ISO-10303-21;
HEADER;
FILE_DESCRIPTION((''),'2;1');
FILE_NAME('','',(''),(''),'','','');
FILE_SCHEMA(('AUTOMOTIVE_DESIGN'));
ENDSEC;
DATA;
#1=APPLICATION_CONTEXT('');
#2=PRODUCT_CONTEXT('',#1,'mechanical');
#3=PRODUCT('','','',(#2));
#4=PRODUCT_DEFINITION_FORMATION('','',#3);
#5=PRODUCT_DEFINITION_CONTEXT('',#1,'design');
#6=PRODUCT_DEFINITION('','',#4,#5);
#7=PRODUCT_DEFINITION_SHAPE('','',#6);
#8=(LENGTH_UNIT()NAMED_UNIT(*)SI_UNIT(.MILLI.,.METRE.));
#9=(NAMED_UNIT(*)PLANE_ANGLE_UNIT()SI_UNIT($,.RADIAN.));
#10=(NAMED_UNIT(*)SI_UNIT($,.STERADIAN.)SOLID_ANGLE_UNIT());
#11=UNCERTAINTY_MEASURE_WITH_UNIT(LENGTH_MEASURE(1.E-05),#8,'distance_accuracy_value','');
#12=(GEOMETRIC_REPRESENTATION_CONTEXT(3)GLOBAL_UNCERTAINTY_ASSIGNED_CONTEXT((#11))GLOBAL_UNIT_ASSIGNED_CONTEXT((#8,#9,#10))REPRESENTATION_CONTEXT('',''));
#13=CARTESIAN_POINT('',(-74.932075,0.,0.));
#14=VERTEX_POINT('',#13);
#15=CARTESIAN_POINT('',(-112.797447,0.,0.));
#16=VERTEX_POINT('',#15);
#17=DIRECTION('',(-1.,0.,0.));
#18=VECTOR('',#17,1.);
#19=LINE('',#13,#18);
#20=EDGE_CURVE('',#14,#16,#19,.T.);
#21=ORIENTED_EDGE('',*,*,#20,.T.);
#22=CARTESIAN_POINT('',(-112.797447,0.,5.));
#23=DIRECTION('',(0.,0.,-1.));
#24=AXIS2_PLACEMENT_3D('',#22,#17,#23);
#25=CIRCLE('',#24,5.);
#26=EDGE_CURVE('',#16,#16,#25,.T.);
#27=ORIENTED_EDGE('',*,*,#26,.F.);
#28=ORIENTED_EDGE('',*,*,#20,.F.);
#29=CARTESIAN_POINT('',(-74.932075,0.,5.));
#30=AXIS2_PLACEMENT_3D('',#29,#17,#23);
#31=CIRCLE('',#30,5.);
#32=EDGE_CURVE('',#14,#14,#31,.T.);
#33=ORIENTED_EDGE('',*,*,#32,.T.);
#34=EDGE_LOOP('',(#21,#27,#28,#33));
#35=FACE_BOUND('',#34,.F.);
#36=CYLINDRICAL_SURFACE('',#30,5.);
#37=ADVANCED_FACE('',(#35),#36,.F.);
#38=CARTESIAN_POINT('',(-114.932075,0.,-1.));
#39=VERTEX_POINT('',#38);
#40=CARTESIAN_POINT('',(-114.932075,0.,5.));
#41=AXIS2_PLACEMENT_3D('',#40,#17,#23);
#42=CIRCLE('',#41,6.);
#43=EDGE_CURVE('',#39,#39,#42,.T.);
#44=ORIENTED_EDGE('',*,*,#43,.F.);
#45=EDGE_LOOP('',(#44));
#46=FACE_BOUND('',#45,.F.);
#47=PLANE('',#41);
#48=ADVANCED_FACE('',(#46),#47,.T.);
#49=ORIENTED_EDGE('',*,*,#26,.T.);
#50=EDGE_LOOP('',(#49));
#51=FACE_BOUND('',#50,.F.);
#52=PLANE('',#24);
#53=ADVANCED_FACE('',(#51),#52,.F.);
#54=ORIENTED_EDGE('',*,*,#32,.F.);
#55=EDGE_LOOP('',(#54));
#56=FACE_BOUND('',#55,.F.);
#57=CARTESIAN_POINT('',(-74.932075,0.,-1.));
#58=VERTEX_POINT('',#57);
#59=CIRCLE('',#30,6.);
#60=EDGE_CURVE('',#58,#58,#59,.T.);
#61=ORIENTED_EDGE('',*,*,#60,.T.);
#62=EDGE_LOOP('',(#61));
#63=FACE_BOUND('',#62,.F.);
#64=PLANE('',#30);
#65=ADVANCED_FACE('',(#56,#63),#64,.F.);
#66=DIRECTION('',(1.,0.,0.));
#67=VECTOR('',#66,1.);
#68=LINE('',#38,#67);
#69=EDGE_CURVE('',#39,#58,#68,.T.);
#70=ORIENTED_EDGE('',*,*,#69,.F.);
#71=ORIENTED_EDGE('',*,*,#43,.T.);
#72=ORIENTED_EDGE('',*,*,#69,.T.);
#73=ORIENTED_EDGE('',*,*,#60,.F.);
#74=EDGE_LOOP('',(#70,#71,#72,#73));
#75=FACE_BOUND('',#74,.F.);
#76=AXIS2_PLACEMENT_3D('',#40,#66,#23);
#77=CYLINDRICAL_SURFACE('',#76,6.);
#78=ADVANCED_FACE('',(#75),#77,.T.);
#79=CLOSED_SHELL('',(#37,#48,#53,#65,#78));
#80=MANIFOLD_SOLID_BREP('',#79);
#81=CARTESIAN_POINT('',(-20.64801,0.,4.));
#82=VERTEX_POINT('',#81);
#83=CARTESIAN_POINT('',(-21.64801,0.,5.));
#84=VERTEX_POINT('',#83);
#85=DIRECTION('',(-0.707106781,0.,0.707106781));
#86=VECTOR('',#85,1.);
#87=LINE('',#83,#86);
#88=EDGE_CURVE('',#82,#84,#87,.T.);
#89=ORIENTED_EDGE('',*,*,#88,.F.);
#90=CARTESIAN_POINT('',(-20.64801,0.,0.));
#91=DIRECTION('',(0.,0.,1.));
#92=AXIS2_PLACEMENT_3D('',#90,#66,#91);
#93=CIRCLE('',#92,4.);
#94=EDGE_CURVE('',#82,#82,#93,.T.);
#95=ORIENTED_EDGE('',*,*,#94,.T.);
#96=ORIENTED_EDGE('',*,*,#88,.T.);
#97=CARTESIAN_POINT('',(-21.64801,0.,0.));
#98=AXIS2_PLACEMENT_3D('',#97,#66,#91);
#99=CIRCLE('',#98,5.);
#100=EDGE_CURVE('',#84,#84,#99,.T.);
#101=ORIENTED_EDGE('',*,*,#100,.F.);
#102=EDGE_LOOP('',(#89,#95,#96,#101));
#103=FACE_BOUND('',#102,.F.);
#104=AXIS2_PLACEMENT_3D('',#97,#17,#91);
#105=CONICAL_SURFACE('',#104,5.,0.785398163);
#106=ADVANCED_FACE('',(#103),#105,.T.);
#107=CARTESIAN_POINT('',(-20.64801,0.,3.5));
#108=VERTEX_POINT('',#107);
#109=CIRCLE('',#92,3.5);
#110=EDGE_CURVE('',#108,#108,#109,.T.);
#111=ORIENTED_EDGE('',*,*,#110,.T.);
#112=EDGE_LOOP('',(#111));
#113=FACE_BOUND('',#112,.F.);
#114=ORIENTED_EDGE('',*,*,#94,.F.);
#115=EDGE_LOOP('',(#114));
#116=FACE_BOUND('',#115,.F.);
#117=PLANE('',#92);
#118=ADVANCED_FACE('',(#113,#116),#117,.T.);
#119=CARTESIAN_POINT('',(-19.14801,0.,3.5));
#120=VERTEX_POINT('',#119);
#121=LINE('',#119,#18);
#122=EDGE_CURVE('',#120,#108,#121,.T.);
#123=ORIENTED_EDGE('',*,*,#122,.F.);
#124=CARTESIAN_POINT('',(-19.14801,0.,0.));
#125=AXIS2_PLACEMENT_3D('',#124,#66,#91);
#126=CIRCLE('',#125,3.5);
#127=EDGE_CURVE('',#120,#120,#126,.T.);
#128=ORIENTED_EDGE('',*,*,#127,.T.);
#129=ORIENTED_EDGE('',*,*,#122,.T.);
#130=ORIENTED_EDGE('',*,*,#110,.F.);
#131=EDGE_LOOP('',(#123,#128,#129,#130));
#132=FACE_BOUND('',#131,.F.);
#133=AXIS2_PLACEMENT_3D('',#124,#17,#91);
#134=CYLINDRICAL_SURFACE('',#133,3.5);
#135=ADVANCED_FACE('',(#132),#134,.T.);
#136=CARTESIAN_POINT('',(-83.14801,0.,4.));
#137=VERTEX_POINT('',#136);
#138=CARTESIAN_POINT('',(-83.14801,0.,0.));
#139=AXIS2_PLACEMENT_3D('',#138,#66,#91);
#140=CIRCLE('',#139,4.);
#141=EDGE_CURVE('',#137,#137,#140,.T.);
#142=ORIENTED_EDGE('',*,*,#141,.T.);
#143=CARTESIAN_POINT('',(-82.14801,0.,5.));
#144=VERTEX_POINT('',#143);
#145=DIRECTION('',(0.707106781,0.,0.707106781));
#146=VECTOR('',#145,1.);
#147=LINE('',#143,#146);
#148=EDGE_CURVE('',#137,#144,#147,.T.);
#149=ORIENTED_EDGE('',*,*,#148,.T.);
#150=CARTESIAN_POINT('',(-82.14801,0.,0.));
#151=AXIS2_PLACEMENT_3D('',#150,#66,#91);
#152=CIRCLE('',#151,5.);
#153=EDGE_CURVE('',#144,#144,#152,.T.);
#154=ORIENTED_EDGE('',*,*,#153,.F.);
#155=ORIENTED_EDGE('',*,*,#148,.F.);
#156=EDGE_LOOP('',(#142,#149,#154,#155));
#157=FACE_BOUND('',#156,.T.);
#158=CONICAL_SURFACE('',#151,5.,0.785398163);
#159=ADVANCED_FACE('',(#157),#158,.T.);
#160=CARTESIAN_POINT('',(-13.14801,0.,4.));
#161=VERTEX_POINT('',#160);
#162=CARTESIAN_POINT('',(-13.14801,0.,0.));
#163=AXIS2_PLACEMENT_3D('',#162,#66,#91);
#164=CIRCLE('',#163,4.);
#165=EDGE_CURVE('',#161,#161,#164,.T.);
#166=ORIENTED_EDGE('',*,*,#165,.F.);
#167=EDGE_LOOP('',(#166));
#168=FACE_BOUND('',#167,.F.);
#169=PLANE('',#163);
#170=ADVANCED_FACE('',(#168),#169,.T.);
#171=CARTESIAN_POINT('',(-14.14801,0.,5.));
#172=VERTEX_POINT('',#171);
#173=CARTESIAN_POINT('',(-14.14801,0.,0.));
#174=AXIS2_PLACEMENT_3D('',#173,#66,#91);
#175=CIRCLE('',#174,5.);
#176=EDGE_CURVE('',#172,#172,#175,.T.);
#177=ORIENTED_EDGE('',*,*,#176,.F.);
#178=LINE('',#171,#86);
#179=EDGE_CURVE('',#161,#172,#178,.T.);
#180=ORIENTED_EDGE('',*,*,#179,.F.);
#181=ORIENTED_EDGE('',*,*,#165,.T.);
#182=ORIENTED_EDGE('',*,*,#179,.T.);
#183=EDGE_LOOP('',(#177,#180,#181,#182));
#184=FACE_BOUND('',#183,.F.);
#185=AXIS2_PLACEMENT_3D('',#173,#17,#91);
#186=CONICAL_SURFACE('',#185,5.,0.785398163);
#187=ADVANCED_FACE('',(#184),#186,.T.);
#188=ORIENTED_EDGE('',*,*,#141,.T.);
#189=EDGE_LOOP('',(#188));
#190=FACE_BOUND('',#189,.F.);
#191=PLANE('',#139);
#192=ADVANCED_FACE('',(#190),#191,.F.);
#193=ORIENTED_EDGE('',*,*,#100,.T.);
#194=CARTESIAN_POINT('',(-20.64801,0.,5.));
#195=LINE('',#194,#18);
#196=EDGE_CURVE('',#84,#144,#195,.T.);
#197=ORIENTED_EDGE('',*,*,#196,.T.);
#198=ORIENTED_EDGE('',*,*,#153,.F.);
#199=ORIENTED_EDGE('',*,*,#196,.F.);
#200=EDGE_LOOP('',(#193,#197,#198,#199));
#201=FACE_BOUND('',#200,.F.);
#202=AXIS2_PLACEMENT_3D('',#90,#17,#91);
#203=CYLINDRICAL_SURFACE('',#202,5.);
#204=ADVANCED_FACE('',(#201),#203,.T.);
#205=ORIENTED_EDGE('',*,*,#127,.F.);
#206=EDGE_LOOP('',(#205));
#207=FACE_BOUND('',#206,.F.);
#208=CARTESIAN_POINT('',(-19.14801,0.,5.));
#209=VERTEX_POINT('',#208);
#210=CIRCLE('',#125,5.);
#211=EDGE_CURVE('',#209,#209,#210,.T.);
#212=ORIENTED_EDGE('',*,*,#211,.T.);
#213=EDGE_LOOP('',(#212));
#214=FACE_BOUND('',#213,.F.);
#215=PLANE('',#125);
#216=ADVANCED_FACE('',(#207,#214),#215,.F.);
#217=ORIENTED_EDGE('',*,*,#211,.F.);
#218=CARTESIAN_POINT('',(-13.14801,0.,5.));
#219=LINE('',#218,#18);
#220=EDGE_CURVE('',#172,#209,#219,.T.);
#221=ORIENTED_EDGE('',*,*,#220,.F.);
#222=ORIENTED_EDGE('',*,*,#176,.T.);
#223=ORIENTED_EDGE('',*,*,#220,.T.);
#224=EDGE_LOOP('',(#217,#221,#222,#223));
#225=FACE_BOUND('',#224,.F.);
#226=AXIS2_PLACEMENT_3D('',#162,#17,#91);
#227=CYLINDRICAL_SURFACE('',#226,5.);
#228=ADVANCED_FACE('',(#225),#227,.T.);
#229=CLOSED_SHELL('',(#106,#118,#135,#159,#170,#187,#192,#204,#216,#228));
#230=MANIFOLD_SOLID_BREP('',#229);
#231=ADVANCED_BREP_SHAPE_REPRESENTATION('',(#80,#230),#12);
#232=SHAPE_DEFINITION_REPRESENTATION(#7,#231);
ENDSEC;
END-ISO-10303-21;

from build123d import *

# Parameters (mm, degrees)
F2_SIZE = 1


with BuildPart() as f1:
    # F0 (on Front) → F1 (revolve)
    with BuildSketch(Plane.XZ):
        Polygon((-83.1480100751, 5), (-83.1480100751, 0), (-74.9320751429, 0), (-13.1480100751, 0), (-13.1480100751, 5), (-19.1480100751, 5), (-19.1480100751, 3.5), (-20.6480100751, 3.5), (-20.6480100751, 5), (-74.9320751429, 5), align=None)
    revolve(axis=Axis((-48.1480100751, 0, 0), (1, 0, 0)))

    # F2
    f2_edges = [f1.edges().sort_by_distance(p)[0] for p in [
        (-13.14801, 0, -5),
        (-20.64801, 0, -5),
        (-83.14801, 0, -5),
    ]]
    chamfer(f2_edges, length=F2_SIZE)


with BuildPart() as f3:
    # F0 (on Front) → F3 (revolve)
    with BuildSketch(Plane.XZ):
        Polygon((-74.9320751429, 0), (-83.1480100751, 0), (-112.7974465489, 0), (-112.7974465489, -1), (-74.9320751429, -1), align=None)
        Polygon((-112.7974465489, -1), (-112.7974465489, 0), (-112.7974465489, 5), (-114.9320751429, 5), (-114.9320751429, 0), (-114.9320751429, -1), align=None)
    revolve(axis=Axis((-94.9320751429, 0, 5), (-1, 0, 0)))


solid = Compound([f1.part, f3.part])
